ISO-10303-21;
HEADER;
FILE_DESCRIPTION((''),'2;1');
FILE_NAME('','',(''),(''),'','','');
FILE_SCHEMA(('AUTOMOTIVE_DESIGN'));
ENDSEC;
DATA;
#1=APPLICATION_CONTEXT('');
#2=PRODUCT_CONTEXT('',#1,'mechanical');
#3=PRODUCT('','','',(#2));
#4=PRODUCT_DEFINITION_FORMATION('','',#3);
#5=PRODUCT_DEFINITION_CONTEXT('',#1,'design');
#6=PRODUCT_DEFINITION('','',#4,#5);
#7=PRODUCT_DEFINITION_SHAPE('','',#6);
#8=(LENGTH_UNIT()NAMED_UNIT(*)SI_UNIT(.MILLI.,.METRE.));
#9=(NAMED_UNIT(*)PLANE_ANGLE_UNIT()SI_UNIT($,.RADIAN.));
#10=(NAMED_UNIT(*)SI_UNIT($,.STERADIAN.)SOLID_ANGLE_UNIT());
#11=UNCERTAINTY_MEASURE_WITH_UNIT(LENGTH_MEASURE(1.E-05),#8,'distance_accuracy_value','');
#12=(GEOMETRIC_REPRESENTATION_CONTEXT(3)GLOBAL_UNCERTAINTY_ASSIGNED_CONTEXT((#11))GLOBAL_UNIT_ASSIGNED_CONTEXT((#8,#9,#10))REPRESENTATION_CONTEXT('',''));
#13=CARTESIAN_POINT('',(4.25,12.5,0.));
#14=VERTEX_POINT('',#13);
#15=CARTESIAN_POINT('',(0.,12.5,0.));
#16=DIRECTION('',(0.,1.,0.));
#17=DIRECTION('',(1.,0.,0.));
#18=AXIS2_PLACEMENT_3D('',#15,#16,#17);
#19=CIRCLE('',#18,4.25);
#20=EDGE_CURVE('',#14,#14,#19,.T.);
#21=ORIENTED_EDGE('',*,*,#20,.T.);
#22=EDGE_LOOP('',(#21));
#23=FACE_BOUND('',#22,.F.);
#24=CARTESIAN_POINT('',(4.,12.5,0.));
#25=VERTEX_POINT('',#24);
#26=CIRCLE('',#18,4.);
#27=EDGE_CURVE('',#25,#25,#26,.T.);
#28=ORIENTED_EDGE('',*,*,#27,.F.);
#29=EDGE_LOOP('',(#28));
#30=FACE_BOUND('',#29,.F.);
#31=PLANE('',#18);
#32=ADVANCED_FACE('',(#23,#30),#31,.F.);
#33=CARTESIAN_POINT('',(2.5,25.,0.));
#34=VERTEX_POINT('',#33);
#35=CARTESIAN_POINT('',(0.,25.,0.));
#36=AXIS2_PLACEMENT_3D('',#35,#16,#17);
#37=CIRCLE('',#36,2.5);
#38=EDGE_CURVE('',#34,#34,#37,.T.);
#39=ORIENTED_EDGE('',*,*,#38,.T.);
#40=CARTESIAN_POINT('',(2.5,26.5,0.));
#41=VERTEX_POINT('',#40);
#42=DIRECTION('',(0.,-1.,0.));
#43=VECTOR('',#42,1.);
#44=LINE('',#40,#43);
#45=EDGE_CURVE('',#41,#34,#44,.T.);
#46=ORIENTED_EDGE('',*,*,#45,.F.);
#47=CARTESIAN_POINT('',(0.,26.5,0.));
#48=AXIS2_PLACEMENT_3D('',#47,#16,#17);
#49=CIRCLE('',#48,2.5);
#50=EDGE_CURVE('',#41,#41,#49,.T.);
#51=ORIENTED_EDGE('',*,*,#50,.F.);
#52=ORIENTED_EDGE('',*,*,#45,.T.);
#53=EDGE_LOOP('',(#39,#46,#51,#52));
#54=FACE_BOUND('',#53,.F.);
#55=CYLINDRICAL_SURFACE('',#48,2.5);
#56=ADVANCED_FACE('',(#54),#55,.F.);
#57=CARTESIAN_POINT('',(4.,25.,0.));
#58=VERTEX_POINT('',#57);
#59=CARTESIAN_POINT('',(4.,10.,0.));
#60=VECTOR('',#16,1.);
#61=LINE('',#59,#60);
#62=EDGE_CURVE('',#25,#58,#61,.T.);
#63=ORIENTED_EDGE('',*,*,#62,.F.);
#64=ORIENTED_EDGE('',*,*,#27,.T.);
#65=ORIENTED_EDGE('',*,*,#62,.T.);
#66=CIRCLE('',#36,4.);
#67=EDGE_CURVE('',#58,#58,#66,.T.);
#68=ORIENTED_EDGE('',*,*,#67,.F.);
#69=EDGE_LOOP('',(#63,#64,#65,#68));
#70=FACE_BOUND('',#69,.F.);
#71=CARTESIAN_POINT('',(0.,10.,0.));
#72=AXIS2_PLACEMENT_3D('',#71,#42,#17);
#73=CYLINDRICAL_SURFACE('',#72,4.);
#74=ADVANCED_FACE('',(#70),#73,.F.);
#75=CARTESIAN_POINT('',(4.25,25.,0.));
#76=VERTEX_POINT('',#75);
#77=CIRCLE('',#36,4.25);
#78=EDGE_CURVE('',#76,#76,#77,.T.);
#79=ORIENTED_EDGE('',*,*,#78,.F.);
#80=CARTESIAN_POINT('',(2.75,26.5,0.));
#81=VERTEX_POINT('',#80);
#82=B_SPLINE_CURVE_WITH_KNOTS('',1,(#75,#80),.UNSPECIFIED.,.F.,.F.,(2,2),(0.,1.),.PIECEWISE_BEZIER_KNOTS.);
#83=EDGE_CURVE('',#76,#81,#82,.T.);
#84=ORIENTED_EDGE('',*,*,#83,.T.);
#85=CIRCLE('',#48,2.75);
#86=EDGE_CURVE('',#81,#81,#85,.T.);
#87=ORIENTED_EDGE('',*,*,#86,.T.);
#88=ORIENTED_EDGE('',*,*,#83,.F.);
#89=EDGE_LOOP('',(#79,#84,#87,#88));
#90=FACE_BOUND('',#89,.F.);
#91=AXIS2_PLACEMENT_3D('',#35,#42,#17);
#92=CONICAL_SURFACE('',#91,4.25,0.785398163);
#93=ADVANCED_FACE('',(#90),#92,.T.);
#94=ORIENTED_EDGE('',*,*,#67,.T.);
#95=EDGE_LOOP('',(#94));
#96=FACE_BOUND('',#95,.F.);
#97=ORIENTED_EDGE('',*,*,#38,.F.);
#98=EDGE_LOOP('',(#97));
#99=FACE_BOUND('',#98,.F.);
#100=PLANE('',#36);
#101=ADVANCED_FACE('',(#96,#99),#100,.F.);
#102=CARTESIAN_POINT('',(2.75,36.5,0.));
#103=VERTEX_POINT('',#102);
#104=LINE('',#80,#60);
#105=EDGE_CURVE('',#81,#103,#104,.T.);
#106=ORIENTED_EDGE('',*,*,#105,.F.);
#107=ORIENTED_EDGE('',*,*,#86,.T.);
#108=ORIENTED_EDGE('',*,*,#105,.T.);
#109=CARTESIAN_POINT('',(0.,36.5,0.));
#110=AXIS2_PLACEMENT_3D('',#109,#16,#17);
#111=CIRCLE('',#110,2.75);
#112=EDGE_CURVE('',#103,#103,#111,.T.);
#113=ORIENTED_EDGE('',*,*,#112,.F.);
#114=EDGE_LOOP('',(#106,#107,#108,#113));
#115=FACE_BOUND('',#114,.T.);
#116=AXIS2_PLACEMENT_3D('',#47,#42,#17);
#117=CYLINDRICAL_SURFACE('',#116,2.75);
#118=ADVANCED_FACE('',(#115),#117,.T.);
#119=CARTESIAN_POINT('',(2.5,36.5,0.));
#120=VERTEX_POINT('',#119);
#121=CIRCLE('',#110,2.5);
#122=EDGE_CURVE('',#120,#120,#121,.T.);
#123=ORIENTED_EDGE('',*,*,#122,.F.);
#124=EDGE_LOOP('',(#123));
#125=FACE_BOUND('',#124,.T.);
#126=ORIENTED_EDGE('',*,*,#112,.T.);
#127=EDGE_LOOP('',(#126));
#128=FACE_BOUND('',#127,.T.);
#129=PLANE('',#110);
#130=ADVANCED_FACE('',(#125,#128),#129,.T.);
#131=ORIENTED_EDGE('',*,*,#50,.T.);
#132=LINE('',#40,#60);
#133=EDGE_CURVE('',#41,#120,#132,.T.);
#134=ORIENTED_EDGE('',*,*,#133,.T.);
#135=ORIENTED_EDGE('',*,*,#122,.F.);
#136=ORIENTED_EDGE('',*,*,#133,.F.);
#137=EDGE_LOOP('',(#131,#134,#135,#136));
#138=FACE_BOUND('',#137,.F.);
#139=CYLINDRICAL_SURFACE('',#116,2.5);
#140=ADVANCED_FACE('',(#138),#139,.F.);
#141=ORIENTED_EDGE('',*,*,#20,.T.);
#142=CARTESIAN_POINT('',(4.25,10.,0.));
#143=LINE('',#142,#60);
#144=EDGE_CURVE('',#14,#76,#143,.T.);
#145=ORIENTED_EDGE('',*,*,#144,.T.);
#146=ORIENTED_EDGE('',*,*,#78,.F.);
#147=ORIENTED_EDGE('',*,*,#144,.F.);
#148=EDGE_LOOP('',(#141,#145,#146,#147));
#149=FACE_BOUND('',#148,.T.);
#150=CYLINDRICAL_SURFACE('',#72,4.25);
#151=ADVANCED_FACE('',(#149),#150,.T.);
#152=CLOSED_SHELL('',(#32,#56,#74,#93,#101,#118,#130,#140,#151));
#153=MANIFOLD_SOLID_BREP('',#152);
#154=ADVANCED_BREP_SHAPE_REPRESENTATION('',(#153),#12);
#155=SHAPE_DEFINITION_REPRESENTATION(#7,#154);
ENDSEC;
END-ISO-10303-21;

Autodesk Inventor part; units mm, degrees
ref_plane "Work Plane3" through (0, 10, 0) normal (0, 1, 0) x (1, 0, 0)
sketch "Sketch2" plane through (0, 10, 0) normal (0, 1, 0) x (1, 0, 0)
  circle A0 centre (0, 0) radius 4
  circle A1 centre (0, 0) radius 4.25
  dimension "d4" = 8
  dimension "d5" = 0.25
extrude "Extrusion2" add sketch "Sketch2" along normal blind 15
extrude "Extrusion3" cut sketch "Sketch2" along normal blind 2.5
ref_plane "Work Plane1" through (0, 11.25, 0) normal (0, 1, 0) x (1, 0, 0)
ref_plane "Work Plane2" through (0, 26.5, 0) normal (0, 1, 0) x (1, 0, 0)
sketch "Sketch6" plane through (0, 26.5, 0) normal (0, 1, 0) x (1, 0, 0)
  circle A0 centre (0, 0) radius 2.75
  dimension "d17" = 5.5
loft "Loft1" add profiles "Sketch6" section 1 edges at (-4.25, 25, 0)
sketch "Sketch7" plane through (0, 26.5, 0) normal (0, 1, 0) x (1, 0, 0)
  circle A0 centre (0, 0) radius 2.5
  dimension "d22" = 5
extrude "Extrusion4" cut sketch "Sketch7" against normal blind 2.5
sketch "Sketch8" plane through (0, 26.5, 0) normal (0, 1, 0) x (1, 0, 0)
  circle A0 centre (0, 0) radius 2.75
  circle A1 centre (0, 0) radius 2.5
  dimension "d25" = 5.5
  dimension "d26" = 0.25
extrude "Extrusion5" add sketch "Sketch8" along normal blind 10
properties part number "5mm to 8mm holder" material "PET Plastic"
